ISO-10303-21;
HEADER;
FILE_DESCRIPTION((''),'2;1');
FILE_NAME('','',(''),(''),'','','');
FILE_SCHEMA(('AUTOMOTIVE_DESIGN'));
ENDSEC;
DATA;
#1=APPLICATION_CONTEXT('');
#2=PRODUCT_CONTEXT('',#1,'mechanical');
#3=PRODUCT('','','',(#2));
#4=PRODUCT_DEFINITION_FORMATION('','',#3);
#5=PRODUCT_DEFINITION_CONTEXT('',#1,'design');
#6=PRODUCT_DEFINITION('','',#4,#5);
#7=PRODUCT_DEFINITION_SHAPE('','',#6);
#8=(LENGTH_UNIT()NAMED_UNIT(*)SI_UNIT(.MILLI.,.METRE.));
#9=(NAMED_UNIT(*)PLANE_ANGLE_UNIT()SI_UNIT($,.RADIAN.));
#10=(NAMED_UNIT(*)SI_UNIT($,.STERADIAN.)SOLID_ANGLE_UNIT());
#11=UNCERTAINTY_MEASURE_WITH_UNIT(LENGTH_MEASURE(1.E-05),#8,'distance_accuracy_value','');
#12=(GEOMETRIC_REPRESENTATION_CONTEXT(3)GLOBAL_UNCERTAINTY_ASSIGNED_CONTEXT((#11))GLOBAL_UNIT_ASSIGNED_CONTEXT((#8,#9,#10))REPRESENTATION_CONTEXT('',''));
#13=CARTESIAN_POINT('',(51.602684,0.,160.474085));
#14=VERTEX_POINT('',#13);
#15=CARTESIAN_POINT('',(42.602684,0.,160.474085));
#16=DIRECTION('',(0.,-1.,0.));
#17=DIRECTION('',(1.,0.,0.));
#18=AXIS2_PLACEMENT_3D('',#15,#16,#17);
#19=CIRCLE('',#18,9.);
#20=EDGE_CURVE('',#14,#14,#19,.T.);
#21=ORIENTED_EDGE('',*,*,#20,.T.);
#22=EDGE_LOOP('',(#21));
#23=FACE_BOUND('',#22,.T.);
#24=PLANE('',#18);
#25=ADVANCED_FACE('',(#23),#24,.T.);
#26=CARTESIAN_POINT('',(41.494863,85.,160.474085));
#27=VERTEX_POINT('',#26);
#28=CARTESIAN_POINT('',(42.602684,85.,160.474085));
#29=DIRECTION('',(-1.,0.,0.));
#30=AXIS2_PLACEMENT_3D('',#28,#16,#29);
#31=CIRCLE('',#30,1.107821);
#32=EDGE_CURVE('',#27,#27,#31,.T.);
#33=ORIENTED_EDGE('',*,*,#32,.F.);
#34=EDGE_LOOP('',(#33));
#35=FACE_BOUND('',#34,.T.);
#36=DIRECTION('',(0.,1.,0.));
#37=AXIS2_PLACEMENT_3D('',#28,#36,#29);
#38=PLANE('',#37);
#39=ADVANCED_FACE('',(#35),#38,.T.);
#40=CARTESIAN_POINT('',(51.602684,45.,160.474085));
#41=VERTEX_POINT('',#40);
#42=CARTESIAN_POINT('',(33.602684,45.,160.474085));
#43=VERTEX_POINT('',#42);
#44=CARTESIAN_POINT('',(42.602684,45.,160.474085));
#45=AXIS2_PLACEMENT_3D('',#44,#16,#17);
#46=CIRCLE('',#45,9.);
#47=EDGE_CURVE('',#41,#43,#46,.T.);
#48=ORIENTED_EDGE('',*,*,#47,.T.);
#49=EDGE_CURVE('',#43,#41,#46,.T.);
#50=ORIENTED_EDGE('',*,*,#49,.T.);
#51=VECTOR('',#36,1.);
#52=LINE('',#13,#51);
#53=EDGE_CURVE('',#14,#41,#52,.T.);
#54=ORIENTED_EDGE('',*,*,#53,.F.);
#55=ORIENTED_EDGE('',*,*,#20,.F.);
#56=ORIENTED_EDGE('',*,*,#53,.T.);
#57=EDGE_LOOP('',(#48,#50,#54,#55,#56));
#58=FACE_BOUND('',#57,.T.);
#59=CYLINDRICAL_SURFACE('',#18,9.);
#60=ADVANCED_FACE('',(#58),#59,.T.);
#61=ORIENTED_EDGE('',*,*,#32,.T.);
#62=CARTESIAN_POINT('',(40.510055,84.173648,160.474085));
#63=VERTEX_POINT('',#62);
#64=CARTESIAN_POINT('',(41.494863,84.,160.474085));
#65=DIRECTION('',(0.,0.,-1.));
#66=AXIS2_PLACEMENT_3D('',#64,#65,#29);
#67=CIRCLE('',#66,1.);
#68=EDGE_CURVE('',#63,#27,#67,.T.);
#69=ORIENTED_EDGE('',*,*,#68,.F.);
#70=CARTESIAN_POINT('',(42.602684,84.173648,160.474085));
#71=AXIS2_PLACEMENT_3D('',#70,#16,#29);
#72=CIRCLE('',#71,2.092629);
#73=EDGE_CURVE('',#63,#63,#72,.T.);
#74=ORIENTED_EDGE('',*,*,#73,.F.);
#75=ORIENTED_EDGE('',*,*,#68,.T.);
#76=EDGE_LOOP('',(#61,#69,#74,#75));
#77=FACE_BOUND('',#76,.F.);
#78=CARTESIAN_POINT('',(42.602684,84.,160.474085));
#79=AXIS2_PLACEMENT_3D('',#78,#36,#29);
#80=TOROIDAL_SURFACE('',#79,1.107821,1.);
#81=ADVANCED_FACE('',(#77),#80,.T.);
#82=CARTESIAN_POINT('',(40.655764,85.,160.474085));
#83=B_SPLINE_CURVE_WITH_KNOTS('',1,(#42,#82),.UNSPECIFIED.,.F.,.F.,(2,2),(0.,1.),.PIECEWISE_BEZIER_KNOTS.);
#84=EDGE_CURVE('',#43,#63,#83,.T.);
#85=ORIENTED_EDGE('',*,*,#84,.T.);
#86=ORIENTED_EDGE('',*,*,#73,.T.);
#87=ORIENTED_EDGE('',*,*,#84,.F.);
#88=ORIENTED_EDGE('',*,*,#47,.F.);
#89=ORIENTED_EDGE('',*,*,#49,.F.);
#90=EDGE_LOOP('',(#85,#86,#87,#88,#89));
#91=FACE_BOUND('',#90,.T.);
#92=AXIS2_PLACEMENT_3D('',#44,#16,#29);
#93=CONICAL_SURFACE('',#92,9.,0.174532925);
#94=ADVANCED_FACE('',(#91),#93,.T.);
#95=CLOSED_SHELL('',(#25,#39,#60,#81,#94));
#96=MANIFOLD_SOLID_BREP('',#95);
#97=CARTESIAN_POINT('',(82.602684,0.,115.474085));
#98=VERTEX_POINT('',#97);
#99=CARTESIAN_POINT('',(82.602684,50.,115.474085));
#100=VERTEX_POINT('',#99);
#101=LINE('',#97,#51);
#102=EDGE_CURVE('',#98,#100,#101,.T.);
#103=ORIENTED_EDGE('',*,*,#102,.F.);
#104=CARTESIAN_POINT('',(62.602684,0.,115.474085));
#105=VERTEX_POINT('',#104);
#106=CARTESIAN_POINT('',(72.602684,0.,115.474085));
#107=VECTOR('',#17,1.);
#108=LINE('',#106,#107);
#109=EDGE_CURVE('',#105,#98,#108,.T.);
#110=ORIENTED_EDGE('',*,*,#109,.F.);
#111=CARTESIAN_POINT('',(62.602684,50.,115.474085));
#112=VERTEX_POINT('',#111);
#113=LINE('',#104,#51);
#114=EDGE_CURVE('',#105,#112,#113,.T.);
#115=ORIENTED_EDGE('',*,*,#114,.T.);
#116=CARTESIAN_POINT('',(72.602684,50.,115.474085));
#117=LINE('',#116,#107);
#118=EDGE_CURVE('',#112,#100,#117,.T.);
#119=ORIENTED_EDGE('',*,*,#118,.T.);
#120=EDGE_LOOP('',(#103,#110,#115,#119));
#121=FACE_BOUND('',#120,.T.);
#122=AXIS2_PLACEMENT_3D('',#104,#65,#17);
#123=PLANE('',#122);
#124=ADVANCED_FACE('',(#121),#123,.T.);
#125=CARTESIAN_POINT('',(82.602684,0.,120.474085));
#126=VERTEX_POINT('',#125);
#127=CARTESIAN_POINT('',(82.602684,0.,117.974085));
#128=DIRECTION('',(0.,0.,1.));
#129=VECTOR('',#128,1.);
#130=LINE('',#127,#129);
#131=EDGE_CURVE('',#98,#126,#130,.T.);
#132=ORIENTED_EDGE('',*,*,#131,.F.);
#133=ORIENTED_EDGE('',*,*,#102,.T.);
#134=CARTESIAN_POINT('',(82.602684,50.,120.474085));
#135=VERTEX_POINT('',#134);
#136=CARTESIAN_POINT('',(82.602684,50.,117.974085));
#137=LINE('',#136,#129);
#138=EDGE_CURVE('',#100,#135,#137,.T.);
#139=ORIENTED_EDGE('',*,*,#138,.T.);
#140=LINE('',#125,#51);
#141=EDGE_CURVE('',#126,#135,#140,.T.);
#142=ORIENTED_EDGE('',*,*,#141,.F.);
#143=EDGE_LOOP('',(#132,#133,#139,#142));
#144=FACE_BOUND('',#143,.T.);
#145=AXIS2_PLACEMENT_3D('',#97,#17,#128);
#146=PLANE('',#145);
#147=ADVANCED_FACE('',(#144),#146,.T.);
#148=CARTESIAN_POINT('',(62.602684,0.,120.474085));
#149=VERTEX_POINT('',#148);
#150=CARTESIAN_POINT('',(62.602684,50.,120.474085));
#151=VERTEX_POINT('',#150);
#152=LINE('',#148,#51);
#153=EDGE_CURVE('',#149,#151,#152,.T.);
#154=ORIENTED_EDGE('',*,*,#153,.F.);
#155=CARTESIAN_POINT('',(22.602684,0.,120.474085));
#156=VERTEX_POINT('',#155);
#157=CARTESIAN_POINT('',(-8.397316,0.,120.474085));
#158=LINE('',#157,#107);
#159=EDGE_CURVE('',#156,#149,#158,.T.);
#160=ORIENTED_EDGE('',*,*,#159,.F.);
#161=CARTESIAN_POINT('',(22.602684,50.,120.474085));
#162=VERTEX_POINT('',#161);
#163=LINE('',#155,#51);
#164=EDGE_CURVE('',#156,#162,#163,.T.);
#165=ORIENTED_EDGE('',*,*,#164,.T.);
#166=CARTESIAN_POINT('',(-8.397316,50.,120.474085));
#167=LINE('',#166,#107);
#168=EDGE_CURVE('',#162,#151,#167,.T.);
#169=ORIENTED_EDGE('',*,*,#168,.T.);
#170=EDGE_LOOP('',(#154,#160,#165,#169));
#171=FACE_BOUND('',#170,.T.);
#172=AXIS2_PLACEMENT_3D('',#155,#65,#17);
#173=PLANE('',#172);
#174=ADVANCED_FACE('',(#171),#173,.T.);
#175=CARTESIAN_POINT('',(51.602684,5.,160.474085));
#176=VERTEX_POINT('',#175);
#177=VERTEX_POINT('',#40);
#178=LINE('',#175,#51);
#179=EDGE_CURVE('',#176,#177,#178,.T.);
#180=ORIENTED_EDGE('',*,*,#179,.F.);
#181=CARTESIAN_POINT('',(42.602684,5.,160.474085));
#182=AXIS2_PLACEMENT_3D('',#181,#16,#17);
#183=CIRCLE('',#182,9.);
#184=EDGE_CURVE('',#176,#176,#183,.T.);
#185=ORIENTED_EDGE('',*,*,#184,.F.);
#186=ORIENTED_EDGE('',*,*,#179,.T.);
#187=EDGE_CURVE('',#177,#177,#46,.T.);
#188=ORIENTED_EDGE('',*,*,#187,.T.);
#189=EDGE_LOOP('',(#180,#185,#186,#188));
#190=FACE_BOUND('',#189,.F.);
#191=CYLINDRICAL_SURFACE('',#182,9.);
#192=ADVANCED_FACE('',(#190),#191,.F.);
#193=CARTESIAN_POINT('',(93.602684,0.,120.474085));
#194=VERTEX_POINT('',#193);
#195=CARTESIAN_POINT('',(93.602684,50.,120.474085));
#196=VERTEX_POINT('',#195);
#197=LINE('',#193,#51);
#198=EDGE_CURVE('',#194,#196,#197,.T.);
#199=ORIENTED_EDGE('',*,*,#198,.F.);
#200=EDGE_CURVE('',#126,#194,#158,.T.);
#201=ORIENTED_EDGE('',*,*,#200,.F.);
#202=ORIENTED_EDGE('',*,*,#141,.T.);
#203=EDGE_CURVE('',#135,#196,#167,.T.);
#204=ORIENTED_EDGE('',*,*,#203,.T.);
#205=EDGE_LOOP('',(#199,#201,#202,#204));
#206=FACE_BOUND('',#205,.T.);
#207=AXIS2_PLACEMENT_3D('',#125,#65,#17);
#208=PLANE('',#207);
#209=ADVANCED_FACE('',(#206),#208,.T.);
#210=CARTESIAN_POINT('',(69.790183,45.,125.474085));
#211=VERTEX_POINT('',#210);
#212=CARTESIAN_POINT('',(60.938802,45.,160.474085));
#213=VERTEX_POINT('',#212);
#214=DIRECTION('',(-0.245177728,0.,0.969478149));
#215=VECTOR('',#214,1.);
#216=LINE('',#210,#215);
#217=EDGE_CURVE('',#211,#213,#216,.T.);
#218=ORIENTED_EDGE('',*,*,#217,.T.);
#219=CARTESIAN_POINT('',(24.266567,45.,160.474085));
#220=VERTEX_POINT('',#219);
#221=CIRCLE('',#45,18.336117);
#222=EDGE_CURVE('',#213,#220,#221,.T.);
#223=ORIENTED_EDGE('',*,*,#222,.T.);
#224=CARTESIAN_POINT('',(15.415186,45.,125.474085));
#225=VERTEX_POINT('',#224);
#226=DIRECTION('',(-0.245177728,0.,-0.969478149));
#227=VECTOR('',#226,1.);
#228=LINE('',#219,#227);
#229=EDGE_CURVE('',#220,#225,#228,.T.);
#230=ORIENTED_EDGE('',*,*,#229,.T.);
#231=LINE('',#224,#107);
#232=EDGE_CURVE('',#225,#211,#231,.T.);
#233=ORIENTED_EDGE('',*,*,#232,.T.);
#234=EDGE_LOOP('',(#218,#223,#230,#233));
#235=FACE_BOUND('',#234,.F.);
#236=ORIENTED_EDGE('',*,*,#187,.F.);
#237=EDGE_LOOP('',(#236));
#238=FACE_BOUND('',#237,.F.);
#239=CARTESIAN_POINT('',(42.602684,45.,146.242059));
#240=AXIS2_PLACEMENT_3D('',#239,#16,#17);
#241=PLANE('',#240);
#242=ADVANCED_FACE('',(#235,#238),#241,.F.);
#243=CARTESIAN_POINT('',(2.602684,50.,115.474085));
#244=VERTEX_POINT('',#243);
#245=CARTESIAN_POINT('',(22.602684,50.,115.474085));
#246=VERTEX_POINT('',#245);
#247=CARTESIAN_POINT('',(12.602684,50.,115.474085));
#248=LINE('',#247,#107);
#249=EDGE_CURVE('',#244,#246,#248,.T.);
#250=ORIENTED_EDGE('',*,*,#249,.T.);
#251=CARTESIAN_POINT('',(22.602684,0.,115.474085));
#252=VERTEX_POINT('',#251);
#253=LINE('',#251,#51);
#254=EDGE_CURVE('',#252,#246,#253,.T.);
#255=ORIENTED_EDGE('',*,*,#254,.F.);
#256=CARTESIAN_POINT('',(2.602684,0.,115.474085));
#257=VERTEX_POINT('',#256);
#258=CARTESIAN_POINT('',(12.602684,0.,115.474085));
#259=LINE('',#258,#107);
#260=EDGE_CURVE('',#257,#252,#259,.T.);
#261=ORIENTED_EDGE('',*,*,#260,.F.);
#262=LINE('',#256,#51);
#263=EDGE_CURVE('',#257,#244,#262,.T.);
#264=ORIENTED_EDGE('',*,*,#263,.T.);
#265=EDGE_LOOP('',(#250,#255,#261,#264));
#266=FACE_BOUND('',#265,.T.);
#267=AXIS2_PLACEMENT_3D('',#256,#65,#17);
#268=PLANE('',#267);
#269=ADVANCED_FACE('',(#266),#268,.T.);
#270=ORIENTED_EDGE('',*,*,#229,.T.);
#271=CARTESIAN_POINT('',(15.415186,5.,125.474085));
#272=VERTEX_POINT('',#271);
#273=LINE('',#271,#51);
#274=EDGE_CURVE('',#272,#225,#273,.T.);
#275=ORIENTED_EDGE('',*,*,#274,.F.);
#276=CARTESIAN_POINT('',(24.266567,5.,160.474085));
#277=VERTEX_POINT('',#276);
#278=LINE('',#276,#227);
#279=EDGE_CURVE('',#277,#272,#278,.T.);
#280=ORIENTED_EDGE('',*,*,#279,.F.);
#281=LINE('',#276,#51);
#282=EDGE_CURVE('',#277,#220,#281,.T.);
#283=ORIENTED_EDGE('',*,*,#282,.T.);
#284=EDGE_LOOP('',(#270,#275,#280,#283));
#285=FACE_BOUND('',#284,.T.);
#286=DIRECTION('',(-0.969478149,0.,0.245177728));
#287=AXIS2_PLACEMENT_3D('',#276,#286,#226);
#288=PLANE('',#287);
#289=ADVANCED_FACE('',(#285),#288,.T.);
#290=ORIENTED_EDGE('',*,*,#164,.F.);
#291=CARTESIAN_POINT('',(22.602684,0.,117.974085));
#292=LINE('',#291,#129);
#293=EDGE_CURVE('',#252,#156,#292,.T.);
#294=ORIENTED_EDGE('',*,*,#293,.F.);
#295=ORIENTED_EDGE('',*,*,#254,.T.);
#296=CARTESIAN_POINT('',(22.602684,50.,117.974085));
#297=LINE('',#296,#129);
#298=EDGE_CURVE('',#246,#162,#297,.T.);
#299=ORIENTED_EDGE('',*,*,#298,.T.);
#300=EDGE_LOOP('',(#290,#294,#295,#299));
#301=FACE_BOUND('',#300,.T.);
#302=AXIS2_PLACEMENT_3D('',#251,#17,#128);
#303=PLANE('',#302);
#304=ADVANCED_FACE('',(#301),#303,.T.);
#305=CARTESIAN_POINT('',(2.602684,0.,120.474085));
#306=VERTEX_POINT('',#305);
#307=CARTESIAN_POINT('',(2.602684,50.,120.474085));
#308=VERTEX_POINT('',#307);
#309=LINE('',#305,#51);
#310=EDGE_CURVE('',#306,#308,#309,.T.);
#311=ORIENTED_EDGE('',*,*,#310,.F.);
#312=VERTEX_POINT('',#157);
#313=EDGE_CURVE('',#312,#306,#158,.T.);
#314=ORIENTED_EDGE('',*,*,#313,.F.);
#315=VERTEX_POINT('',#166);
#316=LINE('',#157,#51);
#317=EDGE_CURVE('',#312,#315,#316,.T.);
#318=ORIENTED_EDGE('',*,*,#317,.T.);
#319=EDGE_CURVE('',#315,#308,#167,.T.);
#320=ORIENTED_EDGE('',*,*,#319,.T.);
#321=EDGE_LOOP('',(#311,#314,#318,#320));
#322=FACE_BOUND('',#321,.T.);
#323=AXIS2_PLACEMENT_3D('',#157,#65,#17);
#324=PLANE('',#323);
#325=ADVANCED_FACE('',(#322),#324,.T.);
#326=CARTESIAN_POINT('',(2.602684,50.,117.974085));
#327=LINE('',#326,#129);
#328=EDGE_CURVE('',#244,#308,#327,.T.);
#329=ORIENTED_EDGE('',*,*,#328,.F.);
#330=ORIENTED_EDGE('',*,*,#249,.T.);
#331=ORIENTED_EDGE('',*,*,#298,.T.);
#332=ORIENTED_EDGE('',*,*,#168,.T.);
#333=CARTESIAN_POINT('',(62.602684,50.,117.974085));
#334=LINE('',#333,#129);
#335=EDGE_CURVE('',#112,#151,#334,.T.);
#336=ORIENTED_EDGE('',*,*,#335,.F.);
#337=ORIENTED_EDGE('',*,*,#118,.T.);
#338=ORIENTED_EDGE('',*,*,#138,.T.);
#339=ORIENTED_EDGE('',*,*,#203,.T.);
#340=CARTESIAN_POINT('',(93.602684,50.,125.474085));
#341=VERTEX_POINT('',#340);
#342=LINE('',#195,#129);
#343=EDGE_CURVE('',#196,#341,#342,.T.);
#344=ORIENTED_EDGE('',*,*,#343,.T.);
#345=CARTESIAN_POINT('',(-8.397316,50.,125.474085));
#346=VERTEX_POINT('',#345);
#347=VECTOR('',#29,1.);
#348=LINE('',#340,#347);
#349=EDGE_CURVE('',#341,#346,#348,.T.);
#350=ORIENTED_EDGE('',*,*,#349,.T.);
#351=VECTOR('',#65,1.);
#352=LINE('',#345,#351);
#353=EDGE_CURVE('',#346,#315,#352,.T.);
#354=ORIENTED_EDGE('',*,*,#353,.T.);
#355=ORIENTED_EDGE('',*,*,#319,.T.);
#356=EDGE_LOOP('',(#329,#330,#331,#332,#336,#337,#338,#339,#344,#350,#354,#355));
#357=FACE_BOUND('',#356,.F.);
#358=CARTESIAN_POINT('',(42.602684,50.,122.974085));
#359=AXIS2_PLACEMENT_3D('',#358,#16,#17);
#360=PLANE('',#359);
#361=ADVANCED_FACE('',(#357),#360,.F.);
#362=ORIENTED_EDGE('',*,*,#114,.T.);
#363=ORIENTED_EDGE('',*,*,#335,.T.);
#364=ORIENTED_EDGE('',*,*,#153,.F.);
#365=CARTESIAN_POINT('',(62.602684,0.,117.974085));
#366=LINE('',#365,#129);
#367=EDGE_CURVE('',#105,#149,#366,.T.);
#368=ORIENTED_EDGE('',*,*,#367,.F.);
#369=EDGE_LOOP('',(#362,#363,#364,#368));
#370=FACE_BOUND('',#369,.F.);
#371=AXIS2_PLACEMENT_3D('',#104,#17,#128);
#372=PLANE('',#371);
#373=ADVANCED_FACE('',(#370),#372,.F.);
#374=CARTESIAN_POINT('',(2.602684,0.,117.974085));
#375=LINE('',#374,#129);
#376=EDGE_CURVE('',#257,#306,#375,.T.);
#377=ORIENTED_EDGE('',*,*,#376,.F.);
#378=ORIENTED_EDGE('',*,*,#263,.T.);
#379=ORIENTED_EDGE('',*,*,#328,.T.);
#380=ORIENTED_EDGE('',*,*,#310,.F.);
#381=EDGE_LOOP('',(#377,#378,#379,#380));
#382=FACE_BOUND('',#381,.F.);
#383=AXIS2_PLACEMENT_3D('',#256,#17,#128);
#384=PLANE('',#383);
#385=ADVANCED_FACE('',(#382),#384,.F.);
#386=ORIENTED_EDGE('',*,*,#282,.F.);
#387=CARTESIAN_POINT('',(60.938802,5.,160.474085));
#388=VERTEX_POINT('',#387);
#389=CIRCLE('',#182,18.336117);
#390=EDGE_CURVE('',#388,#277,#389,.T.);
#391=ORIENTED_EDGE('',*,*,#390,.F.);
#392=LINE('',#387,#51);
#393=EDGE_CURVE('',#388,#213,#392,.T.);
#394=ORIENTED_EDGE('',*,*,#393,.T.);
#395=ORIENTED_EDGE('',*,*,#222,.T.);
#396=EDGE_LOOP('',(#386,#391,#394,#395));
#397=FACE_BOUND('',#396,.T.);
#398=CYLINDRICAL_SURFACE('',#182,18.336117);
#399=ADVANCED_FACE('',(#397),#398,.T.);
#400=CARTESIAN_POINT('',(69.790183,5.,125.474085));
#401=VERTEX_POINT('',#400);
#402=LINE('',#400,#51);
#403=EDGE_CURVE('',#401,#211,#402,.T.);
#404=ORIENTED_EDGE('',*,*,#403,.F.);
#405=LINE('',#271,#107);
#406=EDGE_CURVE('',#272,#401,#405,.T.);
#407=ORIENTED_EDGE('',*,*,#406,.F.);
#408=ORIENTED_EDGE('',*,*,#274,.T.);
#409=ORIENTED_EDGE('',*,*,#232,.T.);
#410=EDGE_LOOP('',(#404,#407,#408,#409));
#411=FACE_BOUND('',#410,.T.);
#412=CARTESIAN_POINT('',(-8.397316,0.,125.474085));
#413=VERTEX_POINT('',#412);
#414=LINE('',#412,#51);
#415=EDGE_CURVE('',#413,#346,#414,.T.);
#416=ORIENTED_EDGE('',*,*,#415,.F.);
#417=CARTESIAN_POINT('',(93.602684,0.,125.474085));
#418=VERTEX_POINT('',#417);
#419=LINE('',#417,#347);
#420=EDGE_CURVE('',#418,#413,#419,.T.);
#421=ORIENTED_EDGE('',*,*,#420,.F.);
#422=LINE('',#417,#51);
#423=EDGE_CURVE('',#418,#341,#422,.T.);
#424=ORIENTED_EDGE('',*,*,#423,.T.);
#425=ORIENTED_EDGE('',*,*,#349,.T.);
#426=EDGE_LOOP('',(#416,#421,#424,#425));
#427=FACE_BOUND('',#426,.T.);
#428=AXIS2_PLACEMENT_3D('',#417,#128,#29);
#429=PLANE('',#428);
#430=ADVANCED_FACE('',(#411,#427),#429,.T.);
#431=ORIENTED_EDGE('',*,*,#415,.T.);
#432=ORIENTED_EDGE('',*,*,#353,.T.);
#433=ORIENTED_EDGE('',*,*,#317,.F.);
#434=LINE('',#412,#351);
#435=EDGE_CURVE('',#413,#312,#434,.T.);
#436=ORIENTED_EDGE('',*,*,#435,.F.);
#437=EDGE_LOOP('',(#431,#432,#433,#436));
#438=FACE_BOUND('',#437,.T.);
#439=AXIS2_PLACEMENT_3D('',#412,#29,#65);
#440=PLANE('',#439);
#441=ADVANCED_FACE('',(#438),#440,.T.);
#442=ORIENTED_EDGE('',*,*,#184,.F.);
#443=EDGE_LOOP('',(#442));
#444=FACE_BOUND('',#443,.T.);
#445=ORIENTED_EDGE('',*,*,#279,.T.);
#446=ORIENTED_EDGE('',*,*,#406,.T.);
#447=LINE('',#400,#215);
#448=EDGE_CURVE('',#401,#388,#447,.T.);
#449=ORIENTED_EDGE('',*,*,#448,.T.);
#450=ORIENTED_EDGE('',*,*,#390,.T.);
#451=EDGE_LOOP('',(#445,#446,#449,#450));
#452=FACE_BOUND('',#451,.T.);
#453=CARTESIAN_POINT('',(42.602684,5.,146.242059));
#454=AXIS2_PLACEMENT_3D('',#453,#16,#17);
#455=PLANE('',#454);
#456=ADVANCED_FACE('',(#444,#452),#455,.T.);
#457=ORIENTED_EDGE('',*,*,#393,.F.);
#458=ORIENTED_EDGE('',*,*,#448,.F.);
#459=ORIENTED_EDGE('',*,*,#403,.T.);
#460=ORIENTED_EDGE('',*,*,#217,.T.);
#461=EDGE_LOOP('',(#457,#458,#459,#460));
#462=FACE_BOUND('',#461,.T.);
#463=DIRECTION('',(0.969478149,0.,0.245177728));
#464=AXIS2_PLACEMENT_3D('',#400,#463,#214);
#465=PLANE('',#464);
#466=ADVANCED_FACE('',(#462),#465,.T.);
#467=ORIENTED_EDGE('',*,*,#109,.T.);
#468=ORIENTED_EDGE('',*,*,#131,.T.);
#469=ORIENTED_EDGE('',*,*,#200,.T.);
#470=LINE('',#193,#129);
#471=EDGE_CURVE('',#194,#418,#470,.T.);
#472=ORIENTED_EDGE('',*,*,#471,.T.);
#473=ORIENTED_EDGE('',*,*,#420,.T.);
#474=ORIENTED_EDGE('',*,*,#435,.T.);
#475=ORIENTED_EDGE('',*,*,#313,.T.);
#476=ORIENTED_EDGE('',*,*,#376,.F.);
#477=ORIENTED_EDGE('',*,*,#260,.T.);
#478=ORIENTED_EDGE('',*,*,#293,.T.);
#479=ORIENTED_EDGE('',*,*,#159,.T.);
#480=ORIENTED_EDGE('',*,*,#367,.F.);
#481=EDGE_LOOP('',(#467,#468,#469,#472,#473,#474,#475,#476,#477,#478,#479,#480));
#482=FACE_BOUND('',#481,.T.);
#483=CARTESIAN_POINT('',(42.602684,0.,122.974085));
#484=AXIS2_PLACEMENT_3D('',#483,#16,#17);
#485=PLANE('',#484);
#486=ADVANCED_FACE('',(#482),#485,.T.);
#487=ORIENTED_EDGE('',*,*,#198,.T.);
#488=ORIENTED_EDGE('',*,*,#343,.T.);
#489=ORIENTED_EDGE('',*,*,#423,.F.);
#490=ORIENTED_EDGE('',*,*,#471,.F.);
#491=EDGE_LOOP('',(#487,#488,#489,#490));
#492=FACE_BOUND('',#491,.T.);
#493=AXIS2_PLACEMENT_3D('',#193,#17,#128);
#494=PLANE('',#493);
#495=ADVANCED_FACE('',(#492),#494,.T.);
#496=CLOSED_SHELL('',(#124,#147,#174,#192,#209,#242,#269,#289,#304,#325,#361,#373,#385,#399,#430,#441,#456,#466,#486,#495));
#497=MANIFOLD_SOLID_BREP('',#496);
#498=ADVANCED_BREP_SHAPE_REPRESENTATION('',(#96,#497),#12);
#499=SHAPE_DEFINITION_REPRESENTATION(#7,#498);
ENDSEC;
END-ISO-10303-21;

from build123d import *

# Parameters (mm, degrees)
F0_W      = 20
F0_H      = 5
F1_DEPTH  = 50
F2_START  = -5
F0_R      = 9
F2_DEPTH  = 40
F3_DEPTH  = 45
F3_FACE_R = 9
F4_DEPTH  = 40
F4_TAPER  = 10
F5_R      = 1


with BuildPart() as f1:
    # F0 (on Front) → F1 (new body)
    with BuildSketch(Plane.XZ):
        Polygon((-8.3973156512, 120.4740846279), (2.6026843488, 120.4740846279), (22.6026843488, 120.4740846279), (62.6026843488, 120.4740846279), (82.6026843488, 120.4740846279), (93.6026843488, 120.4740846279), (93.6026843488, 125.4740846279), (69.7901826352, 125.4740846279), (15.4151860625, 125.4740846279), (-8.3973156512, 125.4740846279), align=None)
        with Locations((12.6026843488, 117.9740846279)):
            Rectangle(F0_W, F0_H)
        with Locations((72.6026843488, 117.9740846279)):
            Rectangle(F0_W, F0_H)
    extrude(amount=-F1_DEPTH)

    # F0 (on Front) → F2 (join)
    with BuildSketch(Plane.XZ.offset(F2_START)):
        with BuildLine():
            Line((24.2665670812, 160.4740846279), (15.4151860625, 125.4740846279))
            Line((15.4151860625, 125.4740846279), (69.7901826352, 125.4740846279))
            Line((69.7901826352, 125.4740846279), (60.9388016164, 160.4740846279))
            ThreePointArc((60.9388016164, 160.4740846279), (42.6026843488, 178.8102018955), (24.2665670812, 160.4740846279))
        make_face()
        with Locations((42.6026843488, 160.4740846279)):
            Circle(F0_R, mode=Mode.SUBTRACT)
    extrude(amount=-F2_DEPTH)


with BuildPart() as f3:
    # F0 (on Front) → F3 (new body, through all)
    with BuildSketch(Plane.XZ):
        with Locations((42.6026843488, 160.4740846279)):
            Circle(F0_R)
    extrude(amount=-F3_DEPTH)

    # F3_face (on face) → F4 (join)
    with BuildSketch(Plane(origin=(42.6026843488, 45, 160.4740846279), x_dir=(-1, 0, 0), z_dir=(0, 1, 0))):
        Circle(F3_FACE_R)
    extrude(amount=F4_DEPTH, taper=F4_TAPER)

    # F5
    f5_edges = [f3.edges().sort_by_distance(p)[0] for p in [
        (44.549605, 85, 160.474085),
    ]]
    fillet(f5_edges, radius=F5_R)


solid = Compound([f1.part, f3.part])
